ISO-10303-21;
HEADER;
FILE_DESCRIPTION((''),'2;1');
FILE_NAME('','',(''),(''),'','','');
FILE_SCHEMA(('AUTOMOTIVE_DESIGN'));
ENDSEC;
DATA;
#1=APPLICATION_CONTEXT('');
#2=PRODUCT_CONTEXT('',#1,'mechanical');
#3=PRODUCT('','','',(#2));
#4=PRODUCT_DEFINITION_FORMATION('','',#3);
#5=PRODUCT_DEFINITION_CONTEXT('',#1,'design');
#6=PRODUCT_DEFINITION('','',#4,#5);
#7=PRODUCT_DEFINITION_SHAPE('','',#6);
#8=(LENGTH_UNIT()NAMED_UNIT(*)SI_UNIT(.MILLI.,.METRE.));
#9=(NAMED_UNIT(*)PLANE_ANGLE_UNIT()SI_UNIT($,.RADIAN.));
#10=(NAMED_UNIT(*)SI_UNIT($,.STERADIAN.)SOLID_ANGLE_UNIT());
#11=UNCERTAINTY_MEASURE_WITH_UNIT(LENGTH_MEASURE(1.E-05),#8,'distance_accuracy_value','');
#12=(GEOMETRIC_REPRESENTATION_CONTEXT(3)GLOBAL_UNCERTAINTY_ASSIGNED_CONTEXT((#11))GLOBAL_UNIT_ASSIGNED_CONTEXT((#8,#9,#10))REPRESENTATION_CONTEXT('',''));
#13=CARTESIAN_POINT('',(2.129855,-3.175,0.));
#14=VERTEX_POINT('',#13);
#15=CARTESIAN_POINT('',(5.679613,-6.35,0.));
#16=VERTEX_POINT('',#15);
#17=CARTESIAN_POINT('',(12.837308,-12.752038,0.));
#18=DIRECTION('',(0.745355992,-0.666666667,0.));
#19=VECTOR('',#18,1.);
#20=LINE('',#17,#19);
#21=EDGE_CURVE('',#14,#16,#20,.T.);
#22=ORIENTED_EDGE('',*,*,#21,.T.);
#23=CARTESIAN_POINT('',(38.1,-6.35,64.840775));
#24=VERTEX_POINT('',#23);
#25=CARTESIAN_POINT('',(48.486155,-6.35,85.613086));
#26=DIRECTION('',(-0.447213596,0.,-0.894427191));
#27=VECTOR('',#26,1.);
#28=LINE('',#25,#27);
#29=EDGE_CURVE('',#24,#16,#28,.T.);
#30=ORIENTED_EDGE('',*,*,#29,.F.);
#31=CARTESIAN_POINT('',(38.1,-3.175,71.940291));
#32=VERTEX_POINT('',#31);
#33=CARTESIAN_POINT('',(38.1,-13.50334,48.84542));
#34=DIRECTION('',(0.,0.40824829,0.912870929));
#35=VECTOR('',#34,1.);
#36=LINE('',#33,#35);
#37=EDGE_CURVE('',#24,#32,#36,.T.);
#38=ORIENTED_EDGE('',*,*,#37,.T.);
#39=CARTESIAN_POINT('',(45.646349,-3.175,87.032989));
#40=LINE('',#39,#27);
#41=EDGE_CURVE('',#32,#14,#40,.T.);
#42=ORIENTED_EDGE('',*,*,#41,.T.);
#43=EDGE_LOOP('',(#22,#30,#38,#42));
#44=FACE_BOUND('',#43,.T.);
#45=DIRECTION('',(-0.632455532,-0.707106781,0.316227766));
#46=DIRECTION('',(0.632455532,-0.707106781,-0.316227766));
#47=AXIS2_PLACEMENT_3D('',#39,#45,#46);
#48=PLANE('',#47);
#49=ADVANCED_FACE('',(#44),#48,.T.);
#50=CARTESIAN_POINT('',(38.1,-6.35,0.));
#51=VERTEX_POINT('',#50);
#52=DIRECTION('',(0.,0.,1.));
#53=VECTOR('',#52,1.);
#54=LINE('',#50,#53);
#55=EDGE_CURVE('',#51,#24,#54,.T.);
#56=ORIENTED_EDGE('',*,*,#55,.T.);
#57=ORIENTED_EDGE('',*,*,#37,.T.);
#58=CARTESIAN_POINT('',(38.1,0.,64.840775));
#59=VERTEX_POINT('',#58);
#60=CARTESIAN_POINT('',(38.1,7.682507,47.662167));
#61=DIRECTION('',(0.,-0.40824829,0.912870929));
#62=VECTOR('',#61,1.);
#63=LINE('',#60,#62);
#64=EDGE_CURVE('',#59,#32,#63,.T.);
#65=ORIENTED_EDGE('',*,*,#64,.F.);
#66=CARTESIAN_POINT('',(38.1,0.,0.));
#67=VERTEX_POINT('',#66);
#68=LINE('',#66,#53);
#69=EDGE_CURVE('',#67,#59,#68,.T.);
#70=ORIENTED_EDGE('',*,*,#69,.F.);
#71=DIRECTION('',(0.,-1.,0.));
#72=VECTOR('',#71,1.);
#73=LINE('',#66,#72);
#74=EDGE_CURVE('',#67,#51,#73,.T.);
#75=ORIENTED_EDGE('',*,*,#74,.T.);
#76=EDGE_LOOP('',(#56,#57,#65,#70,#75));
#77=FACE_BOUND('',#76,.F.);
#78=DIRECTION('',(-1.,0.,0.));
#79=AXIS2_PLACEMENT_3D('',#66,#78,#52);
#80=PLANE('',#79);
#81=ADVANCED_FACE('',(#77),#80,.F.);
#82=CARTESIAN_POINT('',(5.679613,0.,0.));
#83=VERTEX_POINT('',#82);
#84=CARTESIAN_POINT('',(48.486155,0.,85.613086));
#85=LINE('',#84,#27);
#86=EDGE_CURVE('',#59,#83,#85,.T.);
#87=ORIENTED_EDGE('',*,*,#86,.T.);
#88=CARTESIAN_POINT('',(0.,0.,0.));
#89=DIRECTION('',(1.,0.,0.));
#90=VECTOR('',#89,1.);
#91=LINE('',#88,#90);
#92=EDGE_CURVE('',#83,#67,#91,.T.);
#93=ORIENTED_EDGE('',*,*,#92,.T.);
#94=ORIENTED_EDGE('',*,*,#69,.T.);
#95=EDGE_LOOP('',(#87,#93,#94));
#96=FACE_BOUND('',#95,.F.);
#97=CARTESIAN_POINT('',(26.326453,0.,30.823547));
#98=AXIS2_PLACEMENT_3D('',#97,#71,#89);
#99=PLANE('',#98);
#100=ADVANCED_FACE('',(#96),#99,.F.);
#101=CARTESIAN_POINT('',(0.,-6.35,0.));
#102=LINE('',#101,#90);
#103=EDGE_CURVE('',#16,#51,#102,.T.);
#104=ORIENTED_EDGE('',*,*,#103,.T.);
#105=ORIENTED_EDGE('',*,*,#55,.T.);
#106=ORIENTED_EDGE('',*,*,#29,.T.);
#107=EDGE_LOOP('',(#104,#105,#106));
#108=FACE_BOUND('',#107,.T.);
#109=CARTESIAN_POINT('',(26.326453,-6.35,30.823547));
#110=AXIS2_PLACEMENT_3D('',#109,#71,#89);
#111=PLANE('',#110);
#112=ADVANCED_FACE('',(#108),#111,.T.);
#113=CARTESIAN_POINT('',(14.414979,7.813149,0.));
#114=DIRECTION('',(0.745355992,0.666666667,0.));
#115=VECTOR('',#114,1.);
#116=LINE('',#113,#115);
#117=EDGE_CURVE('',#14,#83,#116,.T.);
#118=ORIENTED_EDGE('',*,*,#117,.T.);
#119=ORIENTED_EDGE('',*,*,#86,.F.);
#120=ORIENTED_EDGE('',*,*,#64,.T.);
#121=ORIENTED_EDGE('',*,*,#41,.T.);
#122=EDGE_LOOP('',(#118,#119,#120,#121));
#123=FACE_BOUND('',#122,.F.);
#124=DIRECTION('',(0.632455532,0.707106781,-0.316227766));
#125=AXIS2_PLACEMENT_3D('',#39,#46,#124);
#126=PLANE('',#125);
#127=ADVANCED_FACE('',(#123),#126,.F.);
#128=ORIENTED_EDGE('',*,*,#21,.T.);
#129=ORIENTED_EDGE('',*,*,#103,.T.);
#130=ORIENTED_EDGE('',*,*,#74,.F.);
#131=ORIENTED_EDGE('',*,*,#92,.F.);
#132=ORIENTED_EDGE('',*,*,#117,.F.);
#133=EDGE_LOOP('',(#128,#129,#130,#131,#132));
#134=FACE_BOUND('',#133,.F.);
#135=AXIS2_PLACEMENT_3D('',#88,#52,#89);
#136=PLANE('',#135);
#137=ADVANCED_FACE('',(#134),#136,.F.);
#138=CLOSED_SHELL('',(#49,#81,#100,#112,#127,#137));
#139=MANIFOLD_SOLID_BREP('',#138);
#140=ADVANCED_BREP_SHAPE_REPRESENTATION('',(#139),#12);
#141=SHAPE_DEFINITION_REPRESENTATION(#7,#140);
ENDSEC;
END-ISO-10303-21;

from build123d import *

# Parameters (mm, degrees)
F1_DEPTH    = 6.35
F2_T1_DEPTH = 111.3224891005


# Not quite as in the source:
# - a fillet or chamfer that OpenCascade refuses, or shapes differently, is made with other operations: its cross-section is extruded or revolved along the edge and cut away or added


with BuildPart() as f1:
    # F0 (on Front) → F1 (new body)
    with BuildSketch(Plane.XZ):
        Polygon((38.1, 76.2), (0, 0), (38.1, 0), align=None)
    extrude(amount=F1_DEPTH)

    # F2: chamfer of 5.08 on 2 edges, made by hand

    # F2_s2 → F2_t1 (cut)
    with BuildSketch(Plane(origin=(43.9424653053, 0, 87.8849306106), x_dir=(0, 1, 0), z_dir=(-0.4472135955, 0, -0.894427191))):
        Polygon((-1.27, 0), (-6.35, 5.08), (-6.35, 0), align=None)
        Polygon((-5.08, 0), (0, 5.08), (0, 0), align=None)
    extrude(amount=F2_T1_DEPTH, mode=Mode.SUBTRACT)


solid = f1.part
